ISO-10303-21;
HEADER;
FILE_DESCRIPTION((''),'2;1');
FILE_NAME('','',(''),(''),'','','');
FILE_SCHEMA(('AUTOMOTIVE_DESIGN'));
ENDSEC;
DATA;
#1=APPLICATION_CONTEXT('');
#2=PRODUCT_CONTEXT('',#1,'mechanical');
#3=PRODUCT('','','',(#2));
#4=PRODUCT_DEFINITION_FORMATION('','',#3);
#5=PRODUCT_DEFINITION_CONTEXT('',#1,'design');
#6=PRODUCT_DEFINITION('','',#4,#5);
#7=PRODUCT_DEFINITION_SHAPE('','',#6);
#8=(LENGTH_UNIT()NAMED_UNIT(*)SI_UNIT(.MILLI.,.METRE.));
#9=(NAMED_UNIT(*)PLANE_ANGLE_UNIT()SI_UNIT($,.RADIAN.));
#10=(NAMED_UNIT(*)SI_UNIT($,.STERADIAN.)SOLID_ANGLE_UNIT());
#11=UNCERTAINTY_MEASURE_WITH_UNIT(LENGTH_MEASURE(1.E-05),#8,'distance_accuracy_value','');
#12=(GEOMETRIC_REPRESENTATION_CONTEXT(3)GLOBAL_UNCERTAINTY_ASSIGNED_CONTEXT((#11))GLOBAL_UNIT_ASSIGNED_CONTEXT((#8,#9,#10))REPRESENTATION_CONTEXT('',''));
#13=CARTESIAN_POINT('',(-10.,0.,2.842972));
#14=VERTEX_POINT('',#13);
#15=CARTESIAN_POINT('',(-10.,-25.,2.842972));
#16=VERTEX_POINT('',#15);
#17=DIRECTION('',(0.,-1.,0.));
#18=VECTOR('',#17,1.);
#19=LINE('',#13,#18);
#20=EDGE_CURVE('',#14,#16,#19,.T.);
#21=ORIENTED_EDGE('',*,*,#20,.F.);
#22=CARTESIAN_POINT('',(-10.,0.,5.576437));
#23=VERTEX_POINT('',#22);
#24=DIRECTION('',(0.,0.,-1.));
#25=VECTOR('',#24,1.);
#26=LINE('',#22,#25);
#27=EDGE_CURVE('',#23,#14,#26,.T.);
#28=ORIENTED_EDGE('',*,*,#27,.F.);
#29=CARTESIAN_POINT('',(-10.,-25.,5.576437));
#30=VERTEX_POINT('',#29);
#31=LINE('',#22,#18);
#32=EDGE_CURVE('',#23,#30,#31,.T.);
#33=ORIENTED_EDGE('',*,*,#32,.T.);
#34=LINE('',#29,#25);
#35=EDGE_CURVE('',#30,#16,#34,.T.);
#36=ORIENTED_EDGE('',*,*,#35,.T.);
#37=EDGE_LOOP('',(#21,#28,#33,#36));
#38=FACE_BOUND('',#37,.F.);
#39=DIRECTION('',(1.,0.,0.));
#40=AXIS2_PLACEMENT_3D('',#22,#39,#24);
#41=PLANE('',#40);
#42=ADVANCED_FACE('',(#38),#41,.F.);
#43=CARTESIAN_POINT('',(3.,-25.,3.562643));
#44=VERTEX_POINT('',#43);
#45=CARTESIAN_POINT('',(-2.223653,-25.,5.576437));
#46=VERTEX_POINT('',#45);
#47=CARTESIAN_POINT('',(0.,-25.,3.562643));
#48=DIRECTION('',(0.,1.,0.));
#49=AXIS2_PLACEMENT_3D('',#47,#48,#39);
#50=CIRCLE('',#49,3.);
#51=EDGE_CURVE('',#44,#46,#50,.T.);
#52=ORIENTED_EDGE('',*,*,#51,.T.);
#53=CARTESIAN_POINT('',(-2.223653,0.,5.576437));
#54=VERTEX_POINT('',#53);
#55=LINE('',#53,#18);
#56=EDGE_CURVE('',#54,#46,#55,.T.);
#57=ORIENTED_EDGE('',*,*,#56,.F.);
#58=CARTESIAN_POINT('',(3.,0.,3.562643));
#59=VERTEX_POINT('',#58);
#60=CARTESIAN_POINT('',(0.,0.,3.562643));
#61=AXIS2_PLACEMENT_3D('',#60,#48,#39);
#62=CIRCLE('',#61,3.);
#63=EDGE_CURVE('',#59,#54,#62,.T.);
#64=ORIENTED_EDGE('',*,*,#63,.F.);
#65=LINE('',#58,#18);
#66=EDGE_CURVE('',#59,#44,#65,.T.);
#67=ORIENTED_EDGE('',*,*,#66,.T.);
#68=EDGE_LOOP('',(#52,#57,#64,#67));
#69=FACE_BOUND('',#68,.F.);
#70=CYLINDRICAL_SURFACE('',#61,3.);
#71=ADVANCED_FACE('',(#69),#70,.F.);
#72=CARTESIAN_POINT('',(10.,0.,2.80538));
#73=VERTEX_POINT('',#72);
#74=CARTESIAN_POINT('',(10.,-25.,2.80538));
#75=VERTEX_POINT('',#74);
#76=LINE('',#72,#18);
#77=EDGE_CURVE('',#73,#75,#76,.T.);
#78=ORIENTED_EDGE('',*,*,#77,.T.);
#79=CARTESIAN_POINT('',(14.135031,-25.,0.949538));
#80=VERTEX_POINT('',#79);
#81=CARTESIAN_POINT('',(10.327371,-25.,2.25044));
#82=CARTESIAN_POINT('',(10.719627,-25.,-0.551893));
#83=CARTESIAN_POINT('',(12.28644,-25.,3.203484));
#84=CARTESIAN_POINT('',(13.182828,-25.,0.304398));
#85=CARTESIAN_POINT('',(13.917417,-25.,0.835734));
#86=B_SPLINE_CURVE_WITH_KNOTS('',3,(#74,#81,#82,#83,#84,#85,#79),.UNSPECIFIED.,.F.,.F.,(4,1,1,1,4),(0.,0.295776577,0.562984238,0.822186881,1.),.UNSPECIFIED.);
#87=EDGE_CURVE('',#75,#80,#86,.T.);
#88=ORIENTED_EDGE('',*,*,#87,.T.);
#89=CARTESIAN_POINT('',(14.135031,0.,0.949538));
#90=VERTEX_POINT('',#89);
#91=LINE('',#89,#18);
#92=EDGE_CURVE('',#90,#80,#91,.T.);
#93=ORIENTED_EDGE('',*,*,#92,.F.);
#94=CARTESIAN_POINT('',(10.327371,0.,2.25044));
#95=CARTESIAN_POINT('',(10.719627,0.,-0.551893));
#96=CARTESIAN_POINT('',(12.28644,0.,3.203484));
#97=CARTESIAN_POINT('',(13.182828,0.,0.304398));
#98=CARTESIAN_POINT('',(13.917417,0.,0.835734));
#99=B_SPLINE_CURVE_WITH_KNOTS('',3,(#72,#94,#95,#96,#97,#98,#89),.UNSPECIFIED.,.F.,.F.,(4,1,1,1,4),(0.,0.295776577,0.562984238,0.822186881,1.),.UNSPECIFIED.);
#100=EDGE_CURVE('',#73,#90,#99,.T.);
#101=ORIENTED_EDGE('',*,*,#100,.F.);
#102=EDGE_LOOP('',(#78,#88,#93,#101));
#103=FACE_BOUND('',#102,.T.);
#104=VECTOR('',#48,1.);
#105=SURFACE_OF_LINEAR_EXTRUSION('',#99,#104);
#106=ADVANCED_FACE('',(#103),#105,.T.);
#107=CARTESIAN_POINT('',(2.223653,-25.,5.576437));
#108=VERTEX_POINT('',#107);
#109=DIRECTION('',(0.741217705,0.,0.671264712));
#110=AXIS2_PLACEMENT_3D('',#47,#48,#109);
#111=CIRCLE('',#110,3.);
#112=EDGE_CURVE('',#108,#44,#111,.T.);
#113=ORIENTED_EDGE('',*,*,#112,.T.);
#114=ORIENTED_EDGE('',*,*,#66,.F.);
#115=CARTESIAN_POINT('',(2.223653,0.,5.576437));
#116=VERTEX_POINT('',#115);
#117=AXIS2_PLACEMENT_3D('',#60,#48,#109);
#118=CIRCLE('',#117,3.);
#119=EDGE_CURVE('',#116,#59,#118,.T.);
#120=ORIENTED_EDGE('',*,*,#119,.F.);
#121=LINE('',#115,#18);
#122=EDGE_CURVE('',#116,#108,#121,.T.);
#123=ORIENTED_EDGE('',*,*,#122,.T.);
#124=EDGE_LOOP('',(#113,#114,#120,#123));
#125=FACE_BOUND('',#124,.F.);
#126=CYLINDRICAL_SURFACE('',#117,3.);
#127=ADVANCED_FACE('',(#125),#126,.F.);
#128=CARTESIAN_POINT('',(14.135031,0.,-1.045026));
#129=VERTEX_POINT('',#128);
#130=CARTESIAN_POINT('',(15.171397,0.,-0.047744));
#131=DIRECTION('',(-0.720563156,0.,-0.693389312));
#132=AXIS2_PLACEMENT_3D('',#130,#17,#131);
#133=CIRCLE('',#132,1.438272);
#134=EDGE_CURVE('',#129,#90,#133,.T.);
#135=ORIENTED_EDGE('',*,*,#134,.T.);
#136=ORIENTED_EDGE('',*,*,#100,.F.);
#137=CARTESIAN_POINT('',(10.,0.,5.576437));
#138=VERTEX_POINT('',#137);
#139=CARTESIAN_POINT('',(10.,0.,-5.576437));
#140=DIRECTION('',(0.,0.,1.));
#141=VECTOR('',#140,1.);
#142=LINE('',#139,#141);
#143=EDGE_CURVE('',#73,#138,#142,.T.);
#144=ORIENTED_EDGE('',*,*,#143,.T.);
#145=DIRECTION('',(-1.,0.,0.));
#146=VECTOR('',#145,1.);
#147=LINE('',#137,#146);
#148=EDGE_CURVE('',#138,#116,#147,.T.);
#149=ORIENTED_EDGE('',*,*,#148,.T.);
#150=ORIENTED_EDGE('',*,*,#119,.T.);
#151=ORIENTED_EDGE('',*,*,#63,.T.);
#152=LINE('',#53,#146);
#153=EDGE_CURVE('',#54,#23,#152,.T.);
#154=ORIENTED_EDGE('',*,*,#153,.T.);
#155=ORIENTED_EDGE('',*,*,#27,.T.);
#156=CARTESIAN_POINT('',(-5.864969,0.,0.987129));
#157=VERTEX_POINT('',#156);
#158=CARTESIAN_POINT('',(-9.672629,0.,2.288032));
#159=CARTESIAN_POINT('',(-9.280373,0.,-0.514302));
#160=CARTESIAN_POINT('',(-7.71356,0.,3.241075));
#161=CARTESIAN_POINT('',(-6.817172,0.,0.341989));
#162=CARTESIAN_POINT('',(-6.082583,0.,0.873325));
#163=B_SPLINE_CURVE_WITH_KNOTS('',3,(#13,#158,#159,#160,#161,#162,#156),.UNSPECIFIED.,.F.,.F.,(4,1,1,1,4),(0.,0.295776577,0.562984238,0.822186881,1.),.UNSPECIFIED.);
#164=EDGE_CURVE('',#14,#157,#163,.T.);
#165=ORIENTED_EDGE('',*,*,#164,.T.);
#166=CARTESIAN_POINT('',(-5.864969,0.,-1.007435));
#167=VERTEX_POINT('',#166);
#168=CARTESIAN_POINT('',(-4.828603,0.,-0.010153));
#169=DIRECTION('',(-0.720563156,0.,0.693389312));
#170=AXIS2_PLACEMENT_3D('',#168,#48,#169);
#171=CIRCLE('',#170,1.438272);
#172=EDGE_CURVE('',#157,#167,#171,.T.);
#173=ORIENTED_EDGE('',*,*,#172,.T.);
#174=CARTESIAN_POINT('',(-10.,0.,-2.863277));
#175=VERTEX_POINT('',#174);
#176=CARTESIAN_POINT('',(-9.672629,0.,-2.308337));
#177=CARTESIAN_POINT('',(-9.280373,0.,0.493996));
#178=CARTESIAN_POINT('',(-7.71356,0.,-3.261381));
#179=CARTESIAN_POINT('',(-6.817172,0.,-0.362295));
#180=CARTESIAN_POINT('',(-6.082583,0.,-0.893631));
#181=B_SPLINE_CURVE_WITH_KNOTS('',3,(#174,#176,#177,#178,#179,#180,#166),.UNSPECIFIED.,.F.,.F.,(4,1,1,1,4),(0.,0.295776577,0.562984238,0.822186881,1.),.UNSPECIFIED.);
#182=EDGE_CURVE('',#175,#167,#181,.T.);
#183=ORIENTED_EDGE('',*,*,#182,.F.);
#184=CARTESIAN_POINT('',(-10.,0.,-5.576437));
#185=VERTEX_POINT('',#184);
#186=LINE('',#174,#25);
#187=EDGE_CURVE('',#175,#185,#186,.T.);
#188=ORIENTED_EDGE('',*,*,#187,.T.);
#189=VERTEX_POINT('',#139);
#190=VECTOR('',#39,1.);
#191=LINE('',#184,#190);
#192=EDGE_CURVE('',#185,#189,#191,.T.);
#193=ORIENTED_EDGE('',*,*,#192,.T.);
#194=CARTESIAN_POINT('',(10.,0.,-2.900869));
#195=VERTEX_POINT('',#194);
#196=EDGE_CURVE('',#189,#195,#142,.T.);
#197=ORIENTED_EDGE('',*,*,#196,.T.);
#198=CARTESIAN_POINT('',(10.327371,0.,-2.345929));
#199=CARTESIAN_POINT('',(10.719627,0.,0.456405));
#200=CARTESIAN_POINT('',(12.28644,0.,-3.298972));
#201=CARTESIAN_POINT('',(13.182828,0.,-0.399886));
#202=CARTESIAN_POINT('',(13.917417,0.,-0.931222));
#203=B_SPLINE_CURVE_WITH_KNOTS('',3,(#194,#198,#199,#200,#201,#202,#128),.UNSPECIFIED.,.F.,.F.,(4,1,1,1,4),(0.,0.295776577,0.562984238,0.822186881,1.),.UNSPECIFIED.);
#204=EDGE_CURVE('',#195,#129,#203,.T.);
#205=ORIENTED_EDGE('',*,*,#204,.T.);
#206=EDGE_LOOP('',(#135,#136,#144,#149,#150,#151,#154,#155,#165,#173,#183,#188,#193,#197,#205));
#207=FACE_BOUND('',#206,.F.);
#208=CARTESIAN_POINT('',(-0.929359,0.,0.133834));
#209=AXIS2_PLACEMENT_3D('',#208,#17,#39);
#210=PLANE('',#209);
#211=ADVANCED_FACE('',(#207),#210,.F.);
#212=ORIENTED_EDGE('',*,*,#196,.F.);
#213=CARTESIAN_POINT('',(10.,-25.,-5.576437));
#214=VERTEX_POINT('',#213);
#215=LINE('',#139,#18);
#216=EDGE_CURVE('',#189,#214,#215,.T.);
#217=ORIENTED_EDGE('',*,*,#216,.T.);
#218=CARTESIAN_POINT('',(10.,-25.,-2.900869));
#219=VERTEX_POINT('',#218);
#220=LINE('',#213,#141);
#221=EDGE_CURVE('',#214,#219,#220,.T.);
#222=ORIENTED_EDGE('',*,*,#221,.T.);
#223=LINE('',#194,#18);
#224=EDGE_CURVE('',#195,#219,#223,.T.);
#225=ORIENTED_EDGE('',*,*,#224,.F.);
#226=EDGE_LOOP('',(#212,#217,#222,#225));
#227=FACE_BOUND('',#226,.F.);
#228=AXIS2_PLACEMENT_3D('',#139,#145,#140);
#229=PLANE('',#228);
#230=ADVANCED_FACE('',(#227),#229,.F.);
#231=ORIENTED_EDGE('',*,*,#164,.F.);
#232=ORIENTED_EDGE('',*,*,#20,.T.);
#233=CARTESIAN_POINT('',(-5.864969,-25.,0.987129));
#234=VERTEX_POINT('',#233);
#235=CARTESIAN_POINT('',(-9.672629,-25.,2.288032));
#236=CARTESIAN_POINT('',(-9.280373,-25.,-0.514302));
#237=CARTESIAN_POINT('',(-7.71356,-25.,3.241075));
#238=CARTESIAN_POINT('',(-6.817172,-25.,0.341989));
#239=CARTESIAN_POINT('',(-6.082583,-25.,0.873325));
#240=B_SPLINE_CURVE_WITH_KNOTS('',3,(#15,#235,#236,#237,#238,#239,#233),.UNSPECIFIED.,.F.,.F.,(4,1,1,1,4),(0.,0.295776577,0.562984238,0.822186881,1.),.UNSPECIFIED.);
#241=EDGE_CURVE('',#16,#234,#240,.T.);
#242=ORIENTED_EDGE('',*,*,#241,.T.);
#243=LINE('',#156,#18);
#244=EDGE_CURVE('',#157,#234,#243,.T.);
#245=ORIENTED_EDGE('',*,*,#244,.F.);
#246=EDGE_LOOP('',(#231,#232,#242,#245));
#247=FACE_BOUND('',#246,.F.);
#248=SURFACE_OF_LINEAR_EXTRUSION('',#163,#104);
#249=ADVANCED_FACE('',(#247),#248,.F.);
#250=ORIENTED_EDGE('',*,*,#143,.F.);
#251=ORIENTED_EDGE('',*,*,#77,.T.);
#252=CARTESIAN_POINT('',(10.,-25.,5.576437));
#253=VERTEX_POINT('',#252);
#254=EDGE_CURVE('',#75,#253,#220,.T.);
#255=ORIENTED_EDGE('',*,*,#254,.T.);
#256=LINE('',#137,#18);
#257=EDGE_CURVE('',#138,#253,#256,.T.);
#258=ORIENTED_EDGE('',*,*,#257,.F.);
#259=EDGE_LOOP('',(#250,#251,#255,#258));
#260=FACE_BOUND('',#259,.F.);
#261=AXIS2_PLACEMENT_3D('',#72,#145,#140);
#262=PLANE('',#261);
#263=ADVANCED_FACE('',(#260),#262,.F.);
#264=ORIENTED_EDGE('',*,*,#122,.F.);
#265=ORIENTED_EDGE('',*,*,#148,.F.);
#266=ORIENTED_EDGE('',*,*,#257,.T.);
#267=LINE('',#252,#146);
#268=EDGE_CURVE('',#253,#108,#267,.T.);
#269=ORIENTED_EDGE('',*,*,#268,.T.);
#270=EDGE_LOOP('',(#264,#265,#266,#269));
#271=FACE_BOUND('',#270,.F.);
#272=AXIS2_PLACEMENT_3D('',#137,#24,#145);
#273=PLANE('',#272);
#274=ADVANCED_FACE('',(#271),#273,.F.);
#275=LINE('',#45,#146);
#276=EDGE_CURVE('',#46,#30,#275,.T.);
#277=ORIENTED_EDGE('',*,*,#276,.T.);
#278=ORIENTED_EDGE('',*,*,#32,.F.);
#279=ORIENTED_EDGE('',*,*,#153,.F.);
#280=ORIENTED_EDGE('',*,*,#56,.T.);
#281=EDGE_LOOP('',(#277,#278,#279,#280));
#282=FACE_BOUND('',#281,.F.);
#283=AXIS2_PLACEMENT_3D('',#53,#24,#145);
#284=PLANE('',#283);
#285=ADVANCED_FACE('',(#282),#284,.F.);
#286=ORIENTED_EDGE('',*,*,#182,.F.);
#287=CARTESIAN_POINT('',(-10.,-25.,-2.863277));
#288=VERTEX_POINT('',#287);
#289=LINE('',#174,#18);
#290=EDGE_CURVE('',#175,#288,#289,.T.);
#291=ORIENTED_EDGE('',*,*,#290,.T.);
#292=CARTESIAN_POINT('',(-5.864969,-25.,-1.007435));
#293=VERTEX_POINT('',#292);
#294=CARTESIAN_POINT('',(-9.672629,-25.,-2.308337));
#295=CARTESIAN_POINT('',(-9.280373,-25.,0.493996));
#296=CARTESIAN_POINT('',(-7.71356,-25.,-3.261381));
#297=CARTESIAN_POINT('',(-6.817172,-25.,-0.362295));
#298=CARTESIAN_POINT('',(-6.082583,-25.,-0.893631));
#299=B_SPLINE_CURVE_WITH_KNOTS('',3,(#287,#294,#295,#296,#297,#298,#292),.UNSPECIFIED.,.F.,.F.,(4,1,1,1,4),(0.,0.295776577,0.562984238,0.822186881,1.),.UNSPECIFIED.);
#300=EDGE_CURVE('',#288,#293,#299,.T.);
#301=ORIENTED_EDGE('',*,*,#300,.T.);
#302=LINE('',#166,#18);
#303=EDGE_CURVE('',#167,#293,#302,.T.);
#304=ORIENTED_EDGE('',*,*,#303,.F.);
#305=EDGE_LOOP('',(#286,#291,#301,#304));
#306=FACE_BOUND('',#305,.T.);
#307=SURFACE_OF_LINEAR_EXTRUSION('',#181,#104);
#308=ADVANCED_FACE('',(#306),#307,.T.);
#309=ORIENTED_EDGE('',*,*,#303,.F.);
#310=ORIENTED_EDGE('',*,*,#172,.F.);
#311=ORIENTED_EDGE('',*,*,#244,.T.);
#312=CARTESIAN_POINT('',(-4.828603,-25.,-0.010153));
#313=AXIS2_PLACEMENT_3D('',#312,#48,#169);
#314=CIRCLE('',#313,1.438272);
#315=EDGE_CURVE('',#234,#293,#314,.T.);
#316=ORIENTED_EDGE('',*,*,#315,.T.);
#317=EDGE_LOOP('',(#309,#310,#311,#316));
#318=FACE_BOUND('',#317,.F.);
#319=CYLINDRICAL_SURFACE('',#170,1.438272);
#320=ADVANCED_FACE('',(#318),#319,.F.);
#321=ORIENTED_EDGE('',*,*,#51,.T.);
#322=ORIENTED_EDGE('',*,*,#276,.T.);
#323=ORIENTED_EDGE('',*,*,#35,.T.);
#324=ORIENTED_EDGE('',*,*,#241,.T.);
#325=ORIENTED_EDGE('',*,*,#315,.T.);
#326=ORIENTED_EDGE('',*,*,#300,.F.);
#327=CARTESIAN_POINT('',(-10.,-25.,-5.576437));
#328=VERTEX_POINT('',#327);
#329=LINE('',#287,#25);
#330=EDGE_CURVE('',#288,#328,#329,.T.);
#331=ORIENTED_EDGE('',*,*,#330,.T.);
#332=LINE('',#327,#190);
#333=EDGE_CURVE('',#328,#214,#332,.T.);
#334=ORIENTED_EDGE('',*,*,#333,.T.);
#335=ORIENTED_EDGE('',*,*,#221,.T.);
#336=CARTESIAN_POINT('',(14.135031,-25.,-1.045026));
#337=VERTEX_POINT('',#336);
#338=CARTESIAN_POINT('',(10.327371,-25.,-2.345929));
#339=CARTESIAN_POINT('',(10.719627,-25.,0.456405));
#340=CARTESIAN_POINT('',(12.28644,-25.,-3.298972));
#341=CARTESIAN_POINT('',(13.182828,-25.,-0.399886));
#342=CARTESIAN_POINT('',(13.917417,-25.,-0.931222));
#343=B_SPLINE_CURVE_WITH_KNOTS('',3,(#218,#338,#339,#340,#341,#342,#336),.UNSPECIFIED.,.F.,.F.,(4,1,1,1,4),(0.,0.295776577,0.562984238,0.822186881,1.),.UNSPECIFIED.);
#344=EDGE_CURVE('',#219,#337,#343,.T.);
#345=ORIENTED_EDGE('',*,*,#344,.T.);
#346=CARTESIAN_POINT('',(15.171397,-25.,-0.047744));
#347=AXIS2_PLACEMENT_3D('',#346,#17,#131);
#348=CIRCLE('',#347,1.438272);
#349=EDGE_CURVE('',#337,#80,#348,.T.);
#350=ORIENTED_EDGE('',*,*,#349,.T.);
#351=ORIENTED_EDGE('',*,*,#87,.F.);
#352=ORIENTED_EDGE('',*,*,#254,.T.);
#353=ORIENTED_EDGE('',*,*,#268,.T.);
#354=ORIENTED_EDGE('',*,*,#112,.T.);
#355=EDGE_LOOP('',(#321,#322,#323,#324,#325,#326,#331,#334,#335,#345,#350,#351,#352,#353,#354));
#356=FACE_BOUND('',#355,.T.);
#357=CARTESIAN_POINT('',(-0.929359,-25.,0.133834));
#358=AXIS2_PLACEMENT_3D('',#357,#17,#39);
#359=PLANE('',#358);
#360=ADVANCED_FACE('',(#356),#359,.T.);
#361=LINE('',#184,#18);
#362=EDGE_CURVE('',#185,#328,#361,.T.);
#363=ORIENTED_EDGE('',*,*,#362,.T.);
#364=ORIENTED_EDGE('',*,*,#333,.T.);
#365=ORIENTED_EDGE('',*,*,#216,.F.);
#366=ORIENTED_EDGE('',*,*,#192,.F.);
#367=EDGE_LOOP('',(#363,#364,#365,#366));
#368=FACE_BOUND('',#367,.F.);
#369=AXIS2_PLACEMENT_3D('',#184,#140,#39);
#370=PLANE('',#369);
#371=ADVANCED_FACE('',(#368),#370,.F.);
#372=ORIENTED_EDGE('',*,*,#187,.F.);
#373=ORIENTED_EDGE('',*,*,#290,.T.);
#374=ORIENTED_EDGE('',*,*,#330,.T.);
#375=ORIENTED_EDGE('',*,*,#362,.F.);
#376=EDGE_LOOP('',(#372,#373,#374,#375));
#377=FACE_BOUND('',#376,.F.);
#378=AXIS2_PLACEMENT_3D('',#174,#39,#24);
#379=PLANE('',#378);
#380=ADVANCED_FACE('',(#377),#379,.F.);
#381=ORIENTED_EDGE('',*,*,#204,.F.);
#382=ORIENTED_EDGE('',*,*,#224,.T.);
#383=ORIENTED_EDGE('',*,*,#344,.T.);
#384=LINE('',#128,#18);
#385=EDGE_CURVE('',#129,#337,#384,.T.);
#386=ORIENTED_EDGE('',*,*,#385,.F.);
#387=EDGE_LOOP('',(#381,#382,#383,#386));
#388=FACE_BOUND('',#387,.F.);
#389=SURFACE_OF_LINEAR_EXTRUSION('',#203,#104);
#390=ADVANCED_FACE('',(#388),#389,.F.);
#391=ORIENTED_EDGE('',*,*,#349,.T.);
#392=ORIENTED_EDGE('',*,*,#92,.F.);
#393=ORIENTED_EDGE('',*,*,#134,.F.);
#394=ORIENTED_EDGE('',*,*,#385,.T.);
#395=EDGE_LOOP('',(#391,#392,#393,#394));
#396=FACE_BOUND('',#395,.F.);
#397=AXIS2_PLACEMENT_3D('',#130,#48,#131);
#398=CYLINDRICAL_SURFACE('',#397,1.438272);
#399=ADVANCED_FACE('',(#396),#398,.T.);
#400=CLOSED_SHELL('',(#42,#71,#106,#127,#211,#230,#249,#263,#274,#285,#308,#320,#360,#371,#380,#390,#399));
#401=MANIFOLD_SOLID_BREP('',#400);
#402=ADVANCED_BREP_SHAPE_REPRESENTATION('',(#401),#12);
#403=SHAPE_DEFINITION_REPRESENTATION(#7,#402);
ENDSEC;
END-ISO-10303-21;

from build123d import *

# Parameters (mm, degrees)
F1_DEPTH = 25


# Not quite as in the source:
# - a feature names something its author has since deleted; it is built from what else it names


with BuildPart() as f1:
    # F0 (on Front) → F1 (new body)
    with BuildSketch(Plane.XZ):
        with BuildLine():
            Line((-10, -5.576437097), (10, -5.576437097))
            Line((10, -5.576437097), (10, -2.9008686543))
            Line((10, -2.9008686543), (10, 2.8053802234))
            Line((10, 2.8053802234), (10, 5.576437097))
            Line((10, 5.576437097), (2.2236531144, 5.576437097))
            ThreePointArc((2.2236531144, 5.576437097), (2.7991926821, 4.6417723907), (3, 3.5626429599))
            ThreePointArc((3, 3.5626429599), (-1.0791294308, 0.7634502778), (-2.2236531144, 5.576437097))
            Line((-2.2236531144, 5.576437097), (-10, 5.576437097))
            Line((-10, 5.576437097), (-10, 2.8429715894))
            add(Edge.make_bspline(
                [(-10, 2.8429715894), (-9.6726290682, 2.2880315783), (-9.2803732694, -0.5143018538), (-7.7135602713, 3.2410752536), (-6.8171719693, 0.3419893756), (-6.0825825554, 0.8733254219), (-5.864968989, 0.9871294023)],
                knots=[0, 0, 0, 0, 0.2957765774, 0.5629842376, 0.8221868806, 1, 1, 1, 1], degree=3))
            ThreePointArc((-5.864968989, 0.9871294023), (-3.3903316246, -0.0101528494), (-5.864968989, -1.0074351012))
            add(Edge.make_bspline(
                [(-10, -2.8632772883), (-9.6726290682, -2.3083372772), (-9.2803732694, 0.4939961549), (-7.7135602713, -3.2613809525), (-6.8171719693, -0.3622950744), (-6.0825825554, -0.8936311207), (-5.864968989, -1.0074351012)],
                knots=[0, 0, 0, 0, 0.2957765774, 0.5629842376, 0.8221868806, 1, 1, 1, 1], degree=3))
            Line((-10, -2.8632772883), (-10, -5.576437097))
        make_face()
        with BuildLine():
            Line((10, 2.8053802234), (10, -2.9008686543))
            add(Edge.make_bspline(
                [(10, -2.9008686543), (10.3273709318, -2.3459286431), (10.7196267306, 0.4564047889), (12.2864397287, -3.2989723184), (13.1828280307, -0.3998864404), (13.9174174446, -0.9312224867), (14.135031011, -1.0450264672)],
                knots=[0, 0, 0, 0, 0.2957765774, 0.5629842376, 0.8221868806, 1, 1, 1, 1], degree=3))
            ThreePointArc((14.135031011, -1.0450264672), (16.6096683754, -0.0477442154), (14.135031011, 0.9495380364))
            add(Edge.make_bspline(
                [(10, 2.8053802234), (10.3273709318, 2.2504402123), (10.7196267306, -0.5518932198), (12.2864397287, 3.2034838876), (13.1828280307, 0.3043980096), (13.9174174446, 0.8357340559), (14.135031011, 0.9495380364)],
                knots=[0, 0, 0, 0, 0.2957765774, 0.5629842376, 0.8221868806, 1, 1, 1, 1], degree=3))
        make_face()
    extrude(amount=F1_DEPTH)


solid = f1.part
